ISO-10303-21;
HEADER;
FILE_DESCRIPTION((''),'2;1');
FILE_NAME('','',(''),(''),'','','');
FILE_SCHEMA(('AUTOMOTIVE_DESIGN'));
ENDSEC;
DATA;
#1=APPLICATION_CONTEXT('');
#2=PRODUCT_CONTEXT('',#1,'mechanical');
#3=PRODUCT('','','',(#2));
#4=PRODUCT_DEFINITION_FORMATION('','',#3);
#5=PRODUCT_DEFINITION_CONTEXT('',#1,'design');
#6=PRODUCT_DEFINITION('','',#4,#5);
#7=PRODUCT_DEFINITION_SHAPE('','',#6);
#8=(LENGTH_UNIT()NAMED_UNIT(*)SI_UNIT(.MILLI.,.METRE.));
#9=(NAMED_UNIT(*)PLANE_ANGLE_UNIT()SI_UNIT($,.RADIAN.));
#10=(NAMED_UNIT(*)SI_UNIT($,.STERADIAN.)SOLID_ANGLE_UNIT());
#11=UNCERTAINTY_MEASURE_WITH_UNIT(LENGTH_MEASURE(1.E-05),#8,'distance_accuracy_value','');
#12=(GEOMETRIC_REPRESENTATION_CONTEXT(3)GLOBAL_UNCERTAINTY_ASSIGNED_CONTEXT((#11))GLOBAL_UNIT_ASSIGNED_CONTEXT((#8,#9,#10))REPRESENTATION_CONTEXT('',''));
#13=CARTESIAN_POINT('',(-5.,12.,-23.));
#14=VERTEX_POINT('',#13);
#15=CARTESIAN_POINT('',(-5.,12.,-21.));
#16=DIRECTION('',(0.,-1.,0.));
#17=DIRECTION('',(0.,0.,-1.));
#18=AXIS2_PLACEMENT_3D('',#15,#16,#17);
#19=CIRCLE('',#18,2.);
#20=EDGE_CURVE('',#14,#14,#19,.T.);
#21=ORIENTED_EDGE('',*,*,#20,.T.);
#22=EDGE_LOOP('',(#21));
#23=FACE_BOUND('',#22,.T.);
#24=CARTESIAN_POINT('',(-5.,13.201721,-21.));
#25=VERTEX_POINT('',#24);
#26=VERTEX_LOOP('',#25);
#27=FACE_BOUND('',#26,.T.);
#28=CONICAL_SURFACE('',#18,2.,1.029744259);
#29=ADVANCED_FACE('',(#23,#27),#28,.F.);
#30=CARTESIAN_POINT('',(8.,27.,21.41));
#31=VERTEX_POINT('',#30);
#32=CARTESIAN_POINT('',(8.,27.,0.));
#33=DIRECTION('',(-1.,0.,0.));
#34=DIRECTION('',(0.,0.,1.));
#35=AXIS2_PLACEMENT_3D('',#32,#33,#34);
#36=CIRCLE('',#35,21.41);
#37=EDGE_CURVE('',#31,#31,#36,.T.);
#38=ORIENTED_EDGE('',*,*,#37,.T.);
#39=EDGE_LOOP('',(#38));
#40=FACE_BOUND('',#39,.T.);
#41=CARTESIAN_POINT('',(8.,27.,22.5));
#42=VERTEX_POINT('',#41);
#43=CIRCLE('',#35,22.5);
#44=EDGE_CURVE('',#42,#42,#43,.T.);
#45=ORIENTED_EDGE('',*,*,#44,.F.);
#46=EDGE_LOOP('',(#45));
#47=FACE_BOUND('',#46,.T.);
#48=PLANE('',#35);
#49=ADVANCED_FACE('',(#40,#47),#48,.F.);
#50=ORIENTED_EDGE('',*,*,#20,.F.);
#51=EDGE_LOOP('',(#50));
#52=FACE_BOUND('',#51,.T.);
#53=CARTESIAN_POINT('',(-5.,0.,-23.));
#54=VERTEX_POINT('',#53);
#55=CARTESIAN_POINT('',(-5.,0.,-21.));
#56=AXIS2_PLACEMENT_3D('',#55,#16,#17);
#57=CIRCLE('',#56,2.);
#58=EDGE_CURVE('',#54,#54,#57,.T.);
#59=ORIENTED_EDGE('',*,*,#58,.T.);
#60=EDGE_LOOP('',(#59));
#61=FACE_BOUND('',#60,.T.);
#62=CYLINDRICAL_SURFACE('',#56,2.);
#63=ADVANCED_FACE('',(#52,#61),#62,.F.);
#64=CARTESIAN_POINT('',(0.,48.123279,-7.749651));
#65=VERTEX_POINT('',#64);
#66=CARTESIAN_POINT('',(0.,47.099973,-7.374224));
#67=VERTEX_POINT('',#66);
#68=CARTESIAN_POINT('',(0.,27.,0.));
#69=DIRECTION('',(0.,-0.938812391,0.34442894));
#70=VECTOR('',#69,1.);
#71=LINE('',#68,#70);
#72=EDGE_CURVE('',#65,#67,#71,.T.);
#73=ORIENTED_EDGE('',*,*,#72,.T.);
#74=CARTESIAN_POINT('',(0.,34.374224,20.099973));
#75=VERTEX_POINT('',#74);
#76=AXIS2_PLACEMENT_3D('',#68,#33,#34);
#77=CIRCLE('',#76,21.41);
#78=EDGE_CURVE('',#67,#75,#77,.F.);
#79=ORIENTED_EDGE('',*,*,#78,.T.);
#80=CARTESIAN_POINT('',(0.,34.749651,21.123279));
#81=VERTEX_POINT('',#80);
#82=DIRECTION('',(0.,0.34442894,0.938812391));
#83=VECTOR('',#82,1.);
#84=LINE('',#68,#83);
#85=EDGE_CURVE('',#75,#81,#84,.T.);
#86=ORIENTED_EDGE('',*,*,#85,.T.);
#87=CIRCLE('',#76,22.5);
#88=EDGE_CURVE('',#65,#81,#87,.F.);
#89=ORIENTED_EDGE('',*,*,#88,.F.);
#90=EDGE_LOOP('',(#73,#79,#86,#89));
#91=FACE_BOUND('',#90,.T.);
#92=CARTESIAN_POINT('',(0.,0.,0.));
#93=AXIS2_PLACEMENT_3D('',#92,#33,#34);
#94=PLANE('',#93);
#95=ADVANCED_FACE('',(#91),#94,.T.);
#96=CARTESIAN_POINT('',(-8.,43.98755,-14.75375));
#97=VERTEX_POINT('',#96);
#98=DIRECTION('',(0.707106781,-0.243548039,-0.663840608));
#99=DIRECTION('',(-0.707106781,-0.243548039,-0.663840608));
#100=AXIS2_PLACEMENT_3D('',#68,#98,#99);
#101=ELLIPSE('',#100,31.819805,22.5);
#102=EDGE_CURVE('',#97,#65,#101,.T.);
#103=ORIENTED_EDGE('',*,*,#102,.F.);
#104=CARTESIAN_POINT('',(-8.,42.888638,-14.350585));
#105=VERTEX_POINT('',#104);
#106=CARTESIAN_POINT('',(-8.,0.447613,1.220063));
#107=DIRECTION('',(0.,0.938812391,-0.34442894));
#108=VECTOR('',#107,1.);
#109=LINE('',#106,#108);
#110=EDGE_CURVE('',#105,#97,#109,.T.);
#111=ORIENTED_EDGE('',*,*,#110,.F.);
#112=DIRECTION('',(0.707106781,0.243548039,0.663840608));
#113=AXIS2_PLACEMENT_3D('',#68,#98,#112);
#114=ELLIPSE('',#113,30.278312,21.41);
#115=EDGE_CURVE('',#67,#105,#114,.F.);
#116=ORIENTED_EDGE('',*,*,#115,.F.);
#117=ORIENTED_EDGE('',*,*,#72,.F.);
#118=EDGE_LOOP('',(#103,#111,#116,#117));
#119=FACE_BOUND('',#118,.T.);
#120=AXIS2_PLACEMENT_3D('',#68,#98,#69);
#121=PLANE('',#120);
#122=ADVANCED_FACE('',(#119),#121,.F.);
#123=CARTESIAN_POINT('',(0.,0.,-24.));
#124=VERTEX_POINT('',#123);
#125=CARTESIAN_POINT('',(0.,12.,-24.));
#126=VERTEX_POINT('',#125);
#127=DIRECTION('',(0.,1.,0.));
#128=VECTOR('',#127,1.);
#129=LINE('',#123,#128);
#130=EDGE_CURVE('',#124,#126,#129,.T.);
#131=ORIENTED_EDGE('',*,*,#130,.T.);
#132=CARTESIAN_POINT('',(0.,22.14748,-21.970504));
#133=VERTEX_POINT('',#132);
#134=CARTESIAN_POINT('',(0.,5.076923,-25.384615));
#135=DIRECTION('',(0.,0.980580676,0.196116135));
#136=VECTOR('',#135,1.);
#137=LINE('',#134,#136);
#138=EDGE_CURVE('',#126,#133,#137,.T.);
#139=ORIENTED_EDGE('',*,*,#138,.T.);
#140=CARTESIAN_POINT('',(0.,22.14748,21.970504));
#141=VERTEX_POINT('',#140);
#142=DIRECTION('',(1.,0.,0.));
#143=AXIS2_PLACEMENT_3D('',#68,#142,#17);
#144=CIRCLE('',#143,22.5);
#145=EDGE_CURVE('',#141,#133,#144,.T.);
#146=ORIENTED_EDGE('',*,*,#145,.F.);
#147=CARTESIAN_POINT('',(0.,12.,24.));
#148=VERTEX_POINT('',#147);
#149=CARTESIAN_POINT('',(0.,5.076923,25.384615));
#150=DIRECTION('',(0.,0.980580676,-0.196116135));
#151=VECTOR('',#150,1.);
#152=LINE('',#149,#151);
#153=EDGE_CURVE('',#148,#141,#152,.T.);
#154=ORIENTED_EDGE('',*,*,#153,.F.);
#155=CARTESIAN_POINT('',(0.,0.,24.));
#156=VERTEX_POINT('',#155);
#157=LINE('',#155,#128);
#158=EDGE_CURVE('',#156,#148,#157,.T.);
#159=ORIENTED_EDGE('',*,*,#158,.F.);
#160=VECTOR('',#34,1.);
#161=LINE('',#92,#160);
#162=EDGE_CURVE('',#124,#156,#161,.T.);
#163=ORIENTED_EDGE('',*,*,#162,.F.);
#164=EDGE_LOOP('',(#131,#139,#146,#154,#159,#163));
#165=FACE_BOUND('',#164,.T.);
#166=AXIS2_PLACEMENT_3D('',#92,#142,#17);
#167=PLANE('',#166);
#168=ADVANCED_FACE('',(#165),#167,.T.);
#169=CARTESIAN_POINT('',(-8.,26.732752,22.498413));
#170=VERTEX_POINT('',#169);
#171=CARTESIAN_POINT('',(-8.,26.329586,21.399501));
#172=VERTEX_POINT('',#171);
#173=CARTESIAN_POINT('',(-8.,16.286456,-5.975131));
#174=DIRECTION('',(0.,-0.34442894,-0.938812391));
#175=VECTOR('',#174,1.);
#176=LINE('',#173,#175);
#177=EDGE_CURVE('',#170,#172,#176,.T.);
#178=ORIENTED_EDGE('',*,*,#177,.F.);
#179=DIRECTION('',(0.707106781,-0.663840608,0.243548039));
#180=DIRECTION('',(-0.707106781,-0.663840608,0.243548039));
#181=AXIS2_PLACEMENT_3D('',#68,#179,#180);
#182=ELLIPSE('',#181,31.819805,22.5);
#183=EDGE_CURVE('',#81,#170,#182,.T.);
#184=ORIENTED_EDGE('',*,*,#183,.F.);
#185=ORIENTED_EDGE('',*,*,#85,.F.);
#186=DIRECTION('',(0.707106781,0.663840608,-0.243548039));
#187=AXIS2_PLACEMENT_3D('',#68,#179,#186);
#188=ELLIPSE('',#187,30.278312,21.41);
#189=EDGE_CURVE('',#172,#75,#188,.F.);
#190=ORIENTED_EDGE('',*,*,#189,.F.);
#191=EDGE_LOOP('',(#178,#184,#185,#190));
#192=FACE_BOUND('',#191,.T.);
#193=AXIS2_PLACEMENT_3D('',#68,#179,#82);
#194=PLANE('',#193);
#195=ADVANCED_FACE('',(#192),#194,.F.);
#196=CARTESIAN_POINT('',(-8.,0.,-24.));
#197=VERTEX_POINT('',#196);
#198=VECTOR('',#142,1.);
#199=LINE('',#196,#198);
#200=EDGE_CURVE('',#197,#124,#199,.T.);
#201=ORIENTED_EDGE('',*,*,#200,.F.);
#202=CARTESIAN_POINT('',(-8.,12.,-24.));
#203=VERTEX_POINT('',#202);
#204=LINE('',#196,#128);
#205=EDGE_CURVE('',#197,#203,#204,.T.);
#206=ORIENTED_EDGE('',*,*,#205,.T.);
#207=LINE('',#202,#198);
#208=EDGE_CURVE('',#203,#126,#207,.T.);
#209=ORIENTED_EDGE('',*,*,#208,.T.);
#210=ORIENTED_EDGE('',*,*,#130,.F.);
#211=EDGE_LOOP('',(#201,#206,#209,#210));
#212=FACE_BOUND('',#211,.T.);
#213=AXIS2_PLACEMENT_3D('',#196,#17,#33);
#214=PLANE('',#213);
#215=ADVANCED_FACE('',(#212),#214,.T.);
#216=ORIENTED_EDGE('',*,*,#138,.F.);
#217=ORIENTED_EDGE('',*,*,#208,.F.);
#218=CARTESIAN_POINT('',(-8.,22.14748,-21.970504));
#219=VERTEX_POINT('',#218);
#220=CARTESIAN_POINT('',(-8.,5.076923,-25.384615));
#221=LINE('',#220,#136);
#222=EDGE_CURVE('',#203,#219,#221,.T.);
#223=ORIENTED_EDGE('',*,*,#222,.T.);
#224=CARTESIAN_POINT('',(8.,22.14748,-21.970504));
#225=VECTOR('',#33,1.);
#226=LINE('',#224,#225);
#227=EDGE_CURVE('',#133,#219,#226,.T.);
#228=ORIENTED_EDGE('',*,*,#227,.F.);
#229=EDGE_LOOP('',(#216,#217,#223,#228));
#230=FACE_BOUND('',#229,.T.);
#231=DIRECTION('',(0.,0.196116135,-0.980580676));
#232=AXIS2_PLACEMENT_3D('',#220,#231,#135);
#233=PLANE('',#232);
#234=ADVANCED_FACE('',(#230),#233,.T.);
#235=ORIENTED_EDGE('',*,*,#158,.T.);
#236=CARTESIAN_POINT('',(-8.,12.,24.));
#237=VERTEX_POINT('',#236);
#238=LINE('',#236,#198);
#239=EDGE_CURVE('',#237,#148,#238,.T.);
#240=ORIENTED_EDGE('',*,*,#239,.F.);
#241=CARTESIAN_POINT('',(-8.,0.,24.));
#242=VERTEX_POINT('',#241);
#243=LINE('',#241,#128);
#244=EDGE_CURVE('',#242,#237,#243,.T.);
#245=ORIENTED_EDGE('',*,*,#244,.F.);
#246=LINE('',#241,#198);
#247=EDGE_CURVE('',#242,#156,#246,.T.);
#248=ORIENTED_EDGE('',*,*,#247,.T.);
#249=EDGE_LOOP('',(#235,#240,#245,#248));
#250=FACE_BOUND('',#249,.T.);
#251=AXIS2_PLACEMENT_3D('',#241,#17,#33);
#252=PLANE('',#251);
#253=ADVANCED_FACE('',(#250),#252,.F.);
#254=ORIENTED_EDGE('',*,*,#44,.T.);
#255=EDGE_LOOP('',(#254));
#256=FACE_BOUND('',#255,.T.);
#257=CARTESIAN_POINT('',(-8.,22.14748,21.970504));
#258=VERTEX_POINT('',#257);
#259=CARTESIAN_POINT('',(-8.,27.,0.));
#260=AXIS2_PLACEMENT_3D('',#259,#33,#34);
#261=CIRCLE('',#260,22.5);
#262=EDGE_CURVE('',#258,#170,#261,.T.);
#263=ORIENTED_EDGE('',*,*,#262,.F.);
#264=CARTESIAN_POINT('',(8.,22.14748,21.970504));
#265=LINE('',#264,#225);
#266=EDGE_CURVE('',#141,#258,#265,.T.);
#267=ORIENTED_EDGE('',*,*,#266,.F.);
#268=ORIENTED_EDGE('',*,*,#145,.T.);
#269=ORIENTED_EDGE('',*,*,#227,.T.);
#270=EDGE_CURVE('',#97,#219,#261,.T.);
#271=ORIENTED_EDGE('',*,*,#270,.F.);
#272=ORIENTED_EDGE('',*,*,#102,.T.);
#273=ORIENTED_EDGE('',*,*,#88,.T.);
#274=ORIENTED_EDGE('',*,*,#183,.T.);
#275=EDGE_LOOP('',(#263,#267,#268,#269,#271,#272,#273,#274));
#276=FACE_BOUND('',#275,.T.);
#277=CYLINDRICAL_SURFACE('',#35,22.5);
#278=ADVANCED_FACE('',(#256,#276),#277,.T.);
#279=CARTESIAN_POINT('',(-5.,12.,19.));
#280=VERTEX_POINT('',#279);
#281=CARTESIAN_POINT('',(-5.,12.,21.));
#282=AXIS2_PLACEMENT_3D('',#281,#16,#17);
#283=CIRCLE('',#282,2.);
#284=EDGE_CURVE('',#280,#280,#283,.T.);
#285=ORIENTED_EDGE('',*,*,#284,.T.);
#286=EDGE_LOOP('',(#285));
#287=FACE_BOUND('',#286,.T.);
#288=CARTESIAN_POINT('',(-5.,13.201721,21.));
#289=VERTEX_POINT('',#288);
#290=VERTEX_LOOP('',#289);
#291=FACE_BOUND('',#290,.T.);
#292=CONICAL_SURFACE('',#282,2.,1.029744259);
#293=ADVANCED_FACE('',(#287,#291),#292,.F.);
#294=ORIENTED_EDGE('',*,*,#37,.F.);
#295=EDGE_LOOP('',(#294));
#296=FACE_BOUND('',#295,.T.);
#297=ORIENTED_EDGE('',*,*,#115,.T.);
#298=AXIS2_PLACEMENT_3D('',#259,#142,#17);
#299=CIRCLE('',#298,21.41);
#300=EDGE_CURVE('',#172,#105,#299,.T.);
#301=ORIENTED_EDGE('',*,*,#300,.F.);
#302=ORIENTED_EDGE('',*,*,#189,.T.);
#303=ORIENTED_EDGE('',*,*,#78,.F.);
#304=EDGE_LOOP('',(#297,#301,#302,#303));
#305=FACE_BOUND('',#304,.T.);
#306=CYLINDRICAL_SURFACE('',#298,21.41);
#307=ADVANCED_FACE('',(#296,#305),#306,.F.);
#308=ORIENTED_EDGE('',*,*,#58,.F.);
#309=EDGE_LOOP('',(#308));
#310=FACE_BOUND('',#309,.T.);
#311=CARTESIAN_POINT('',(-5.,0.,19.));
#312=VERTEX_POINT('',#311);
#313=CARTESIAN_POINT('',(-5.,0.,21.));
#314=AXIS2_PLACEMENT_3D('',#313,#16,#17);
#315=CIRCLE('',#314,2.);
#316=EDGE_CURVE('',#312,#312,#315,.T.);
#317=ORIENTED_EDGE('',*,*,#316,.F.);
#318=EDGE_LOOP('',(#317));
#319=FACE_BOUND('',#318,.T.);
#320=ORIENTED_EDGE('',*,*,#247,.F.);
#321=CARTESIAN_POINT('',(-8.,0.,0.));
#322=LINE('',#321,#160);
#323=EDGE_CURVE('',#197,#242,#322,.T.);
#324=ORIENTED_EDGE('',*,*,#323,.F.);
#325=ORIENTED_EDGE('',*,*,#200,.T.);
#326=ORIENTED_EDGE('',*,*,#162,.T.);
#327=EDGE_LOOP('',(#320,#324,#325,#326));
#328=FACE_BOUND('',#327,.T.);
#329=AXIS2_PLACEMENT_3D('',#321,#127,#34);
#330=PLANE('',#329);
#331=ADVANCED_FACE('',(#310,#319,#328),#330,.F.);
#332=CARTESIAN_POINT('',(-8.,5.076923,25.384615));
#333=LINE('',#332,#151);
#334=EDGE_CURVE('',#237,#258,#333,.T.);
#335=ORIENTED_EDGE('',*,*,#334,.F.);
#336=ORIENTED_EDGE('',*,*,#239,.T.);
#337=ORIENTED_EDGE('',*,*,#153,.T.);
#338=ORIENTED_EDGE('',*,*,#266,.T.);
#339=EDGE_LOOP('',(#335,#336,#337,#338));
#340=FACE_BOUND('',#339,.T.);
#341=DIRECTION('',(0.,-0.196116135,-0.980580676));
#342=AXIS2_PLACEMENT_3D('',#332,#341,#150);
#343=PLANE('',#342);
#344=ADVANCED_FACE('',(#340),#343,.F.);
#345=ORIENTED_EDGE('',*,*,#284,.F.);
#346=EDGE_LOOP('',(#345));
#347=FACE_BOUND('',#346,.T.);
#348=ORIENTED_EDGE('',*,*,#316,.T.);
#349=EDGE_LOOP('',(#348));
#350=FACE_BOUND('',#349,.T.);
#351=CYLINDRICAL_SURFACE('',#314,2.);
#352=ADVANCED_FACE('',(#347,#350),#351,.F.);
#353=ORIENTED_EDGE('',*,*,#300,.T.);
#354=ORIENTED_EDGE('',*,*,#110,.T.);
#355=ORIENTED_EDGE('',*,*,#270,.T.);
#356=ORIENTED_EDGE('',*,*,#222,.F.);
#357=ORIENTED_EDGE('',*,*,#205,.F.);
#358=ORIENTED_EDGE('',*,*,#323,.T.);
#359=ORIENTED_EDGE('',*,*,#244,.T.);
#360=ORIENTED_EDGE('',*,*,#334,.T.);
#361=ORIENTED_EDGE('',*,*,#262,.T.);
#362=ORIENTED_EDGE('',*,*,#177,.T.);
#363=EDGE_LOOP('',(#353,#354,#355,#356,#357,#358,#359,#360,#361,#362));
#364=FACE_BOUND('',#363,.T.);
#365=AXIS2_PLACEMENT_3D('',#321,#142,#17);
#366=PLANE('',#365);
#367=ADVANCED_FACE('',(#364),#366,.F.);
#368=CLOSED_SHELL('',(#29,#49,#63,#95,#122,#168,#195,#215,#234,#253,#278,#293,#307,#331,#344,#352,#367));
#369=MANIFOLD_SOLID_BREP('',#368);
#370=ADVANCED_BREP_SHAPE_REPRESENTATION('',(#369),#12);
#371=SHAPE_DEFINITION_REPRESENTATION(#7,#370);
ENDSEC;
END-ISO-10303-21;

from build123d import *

# Parameters (mm, degrees)
EXTRUDE_1_DEPTH     = 8
MM_1_D              = 4
MM_1_DEPTH          = 12
MM_1_TIP            = 1.201721238
EXTRUDE_START       = -16
SKETCH_5_R          = 22.5
SKETCH_5_R_2        = 21.41
EXTRUDE_2_DEPTH     = 16
CUT_EXTRUDE_1_DEPTH = 8
CHAMFER_1_SIZE      = 8


with BuildPart() as part:
    # 草图1 → 凸台-拉伸1 (new body)
    with BuildSketch(Plane(origin=(0, 0, 0), x_dir=(0, 0, -1), z_dir=(1, 0, 0))):
        with BuildLine():
            Line((0, 0), (0, 5.59))
            ThreePointArc((0, 5.59), (-14.522523536, 11.268362763), (-21.34171621, 25.291418949))
            Line((-21.34171621, 25.291418949), (-24, 12))
            Line((-24, 12), (-24, 0))
            Line((-24, 0), (0, 0))
        make_face()
    extrude_1 = extrude(amount=-EXTRUDE_1_DEPTH)

    # 镜向1: 凸台-拉伸1 across plane
    add(extrude_1.mirror(Plane(origin=(0, 0, 0), x_dir=(1, 0, 0), z_dir=(0, 0, -1))))

    # 大小mm 暗销孔1
    with Locations(Plane(origin=(0, 0, 0), x_dir=(-1, 0, 0), z_dir=(0, -1, 0))):
        with Locations((5, 21), (5, -21)):
            Hole(MM_1_D / 2, depth=MM_1_DEPTH)
            with Locations((0, 0, -(MM_1_DEPTH + MM_1_TIP / 2))):  # 118° drill point
                Cone(0, MM_1_D / 2, MM_1_TIP, mode=Mode.SUBTRACT)

    # 草图5 → 凸台-拉伸2 (add)
    with BuildSketch(Plane.ZY.offset(8).offset(EXTRUDE_START)):
        with Locations((0, 27)):
            Circle(SKETCH_5_R)
        with Locations(Location((0, 27, 0), (0, 0, 180))):
            Circle(SKETCH_5_R_2, mode=Mode.SUBTRACT)
    extrude(amount=EXTRUDE_2_DEPTH)

    # 草图6 → 切除-拉伸1 (cut)
    with BuildSketch(Plane.ZY.offset(8)):
        Polygon((0, 27), (-12.808653102, 61.912636137), (29.307523189, 37.752264491), align=None)
    extrude(amount=-CUT_EXTRUDE_1_DEPTH, mode=Mode.SUBTRACT)

    # 倒角1
    # the kernel refuses this chamfer: 8 mm, written as the material it takes off along each edge
    with BuildSketch(Plane(origin=(-8, 41.835747499, 40.437901637), x_dir=(-0.027495876610586258, -0.938457441934671, 0.3442987168823741), z_dir=(0, -0.3444289396397119, -0.9388123910231819))) as chamfer_1_piece_1_section:
        Polygon((CHAMFER_1_SIZE * 0.999621916911, -CHAMFER_1_SIZE * 0.0274958766106), (-CHAMFER_1_SIZE * 0.0274958766106, -CHAMFER_1_SIZE * 0.999621916911), (0, 0), align=None)
    chamfer_1_piece_1 = extrude(amount=42.236927807, mode=Mode.PRIVATE)
    chamfer_1_piece_1 = split(chamfer_1_piece_1, bisect_by=Plane(origin=(0, 32.080437257, 21.522032065), z_dir=(-1, 0, 0)), keep=Keep.TOP, mode=Mode.PRIVATE)
    add(chamfer_1_piece_1, mode=Mode.SUBTRACT)
    with BuildSketch(Plane(origin=(-8, 27.785350453, -0.288127241), x_dir=(-0.02749587661058627, -0.34429871688237407, -0.9384574419346708), z_dir=(0, 0.9388123910231819, -0.34442893963971194))) as chamfer_1_piece_2_section:
        Polygon((CHAMFER_1_SIZE * 0.999621916911, -CHAMFER_1_SIZE * 0.0274958766106), (-CHAMFER_1_SIZE * 0.0274958766106, -CHAMFER_1_SIZE * 0.999621916911), (0, 0), align=None)
    chamfer_1_piece_2 = extrude(amount=42.236927807, mode=Mode.PRIVATE)
    chamfer_1_piece_2 = split(chamfer_1_piece_2, bisect_by=Plane(origin=(0, 46.701220025, -10.043437483), z_dir=(-1, 0, 0)), keep=Keep.TOP, mode=Mode.PRIVATE)
    add(chamfer_1_piece_2, mode=Mode.SUBTRACT)


solid = part.part
